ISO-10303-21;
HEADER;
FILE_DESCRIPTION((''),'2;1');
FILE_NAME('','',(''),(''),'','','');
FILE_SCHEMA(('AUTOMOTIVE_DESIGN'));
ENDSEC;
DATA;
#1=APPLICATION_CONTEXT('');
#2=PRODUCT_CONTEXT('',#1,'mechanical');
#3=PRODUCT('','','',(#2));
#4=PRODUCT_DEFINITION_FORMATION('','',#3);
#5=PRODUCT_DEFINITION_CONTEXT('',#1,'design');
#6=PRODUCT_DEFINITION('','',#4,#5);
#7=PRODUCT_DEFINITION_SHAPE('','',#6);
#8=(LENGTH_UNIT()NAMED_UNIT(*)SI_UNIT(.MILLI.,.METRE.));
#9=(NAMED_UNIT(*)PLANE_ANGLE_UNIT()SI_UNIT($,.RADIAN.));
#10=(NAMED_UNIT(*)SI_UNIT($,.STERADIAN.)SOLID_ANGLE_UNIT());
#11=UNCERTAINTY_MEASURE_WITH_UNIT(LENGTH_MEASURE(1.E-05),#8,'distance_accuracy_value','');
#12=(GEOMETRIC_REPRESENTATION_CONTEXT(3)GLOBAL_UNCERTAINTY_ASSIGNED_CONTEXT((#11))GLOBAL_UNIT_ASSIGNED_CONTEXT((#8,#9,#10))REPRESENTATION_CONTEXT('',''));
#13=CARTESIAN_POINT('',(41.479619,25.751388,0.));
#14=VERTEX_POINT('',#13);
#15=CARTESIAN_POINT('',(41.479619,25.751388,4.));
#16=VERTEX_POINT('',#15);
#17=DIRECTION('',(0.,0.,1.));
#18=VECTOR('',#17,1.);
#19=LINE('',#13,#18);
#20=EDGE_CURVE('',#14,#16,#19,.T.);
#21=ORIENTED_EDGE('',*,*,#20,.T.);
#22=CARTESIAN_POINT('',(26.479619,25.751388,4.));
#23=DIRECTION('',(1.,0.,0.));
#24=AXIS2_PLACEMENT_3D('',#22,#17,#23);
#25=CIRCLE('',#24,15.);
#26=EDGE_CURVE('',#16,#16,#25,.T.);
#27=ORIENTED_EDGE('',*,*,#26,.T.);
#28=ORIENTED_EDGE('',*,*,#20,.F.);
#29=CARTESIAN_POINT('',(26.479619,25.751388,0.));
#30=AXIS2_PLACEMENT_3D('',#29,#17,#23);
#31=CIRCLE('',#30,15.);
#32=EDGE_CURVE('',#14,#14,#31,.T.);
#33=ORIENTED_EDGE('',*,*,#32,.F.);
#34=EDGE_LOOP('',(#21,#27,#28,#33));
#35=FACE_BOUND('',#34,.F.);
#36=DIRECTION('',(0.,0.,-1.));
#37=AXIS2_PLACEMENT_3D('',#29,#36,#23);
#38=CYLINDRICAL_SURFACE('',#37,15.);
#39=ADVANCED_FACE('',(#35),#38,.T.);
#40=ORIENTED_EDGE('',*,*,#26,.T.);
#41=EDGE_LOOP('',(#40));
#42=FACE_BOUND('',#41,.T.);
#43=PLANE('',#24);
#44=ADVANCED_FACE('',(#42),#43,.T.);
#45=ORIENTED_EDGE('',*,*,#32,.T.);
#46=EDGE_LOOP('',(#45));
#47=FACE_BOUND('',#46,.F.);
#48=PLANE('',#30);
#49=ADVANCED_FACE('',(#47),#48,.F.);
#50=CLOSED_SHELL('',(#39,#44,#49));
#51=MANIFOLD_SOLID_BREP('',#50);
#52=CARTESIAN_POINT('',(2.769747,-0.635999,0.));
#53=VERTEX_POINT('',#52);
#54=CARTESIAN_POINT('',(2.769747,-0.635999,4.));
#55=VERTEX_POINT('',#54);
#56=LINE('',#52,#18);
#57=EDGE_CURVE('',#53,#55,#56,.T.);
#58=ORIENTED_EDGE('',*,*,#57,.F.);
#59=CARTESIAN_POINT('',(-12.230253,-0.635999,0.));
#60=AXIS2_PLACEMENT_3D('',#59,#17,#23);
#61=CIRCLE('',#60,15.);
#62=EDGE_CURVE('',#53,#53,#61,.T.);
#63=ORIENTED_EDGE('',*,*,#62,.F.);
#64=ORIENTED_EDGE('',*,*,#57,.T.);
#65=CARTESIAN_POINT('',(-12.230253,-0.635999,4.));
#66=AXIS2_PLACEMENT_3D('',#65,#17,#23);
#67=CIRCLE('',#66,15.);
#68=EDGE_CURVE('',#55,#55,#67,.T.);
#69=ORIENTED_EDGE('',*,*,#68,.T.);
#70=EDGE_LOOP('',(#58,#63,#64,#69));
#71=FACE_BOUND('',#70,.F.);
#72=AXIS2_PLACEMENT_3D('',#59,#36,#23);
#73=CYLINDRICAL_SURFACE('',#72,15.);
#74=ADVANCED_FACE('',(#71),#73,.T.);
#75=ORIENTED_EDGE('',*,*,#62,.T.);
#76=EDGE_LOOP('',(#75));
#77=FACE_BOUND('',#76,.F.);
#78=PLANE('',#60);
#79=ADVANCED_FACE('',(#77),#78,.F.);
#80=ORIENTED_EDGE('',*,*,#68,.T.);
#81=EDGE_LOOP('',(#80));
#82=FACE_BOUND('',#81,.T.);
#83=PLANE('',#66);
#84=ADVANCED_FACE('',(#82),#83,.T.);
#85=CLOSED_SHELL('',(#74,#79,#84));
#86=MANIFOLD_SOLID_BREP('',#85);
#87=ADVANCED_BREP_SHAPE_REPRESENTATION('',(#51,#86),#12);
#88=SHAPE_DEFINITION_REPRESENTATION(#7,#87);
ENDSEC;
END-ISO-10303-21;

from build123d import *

# Parameters (mm, degrees)
F0_R     = 15
F3_DEPTH = 4
F1_R     = 15
F4_DEPTH = 4


# Not quite as in the source:
# - the program builds the solid bodies; features that only make, move or delete a surface that nothing else refers to are left out


with BuildPart() as f3:
    # F0 (on Top) → F3 (new body)
    with BuildSketch(Plane.XY):
        with Locations((26.4796186239, 25.7513877004)):
            Circle(F0_R)
    extrude(amount=F3_DEPTH)


with BuildPart() as f4:
    # F1 (on Top) → F4 (new body)
    with BuildSketch(Plane.XY):
        with Locations((-12.2302528471, -0.635998731)):
            Circle(F1_R)
    extrude(amount=F4_DEPTH)


solid = Compound([f3.part, f4.part])
